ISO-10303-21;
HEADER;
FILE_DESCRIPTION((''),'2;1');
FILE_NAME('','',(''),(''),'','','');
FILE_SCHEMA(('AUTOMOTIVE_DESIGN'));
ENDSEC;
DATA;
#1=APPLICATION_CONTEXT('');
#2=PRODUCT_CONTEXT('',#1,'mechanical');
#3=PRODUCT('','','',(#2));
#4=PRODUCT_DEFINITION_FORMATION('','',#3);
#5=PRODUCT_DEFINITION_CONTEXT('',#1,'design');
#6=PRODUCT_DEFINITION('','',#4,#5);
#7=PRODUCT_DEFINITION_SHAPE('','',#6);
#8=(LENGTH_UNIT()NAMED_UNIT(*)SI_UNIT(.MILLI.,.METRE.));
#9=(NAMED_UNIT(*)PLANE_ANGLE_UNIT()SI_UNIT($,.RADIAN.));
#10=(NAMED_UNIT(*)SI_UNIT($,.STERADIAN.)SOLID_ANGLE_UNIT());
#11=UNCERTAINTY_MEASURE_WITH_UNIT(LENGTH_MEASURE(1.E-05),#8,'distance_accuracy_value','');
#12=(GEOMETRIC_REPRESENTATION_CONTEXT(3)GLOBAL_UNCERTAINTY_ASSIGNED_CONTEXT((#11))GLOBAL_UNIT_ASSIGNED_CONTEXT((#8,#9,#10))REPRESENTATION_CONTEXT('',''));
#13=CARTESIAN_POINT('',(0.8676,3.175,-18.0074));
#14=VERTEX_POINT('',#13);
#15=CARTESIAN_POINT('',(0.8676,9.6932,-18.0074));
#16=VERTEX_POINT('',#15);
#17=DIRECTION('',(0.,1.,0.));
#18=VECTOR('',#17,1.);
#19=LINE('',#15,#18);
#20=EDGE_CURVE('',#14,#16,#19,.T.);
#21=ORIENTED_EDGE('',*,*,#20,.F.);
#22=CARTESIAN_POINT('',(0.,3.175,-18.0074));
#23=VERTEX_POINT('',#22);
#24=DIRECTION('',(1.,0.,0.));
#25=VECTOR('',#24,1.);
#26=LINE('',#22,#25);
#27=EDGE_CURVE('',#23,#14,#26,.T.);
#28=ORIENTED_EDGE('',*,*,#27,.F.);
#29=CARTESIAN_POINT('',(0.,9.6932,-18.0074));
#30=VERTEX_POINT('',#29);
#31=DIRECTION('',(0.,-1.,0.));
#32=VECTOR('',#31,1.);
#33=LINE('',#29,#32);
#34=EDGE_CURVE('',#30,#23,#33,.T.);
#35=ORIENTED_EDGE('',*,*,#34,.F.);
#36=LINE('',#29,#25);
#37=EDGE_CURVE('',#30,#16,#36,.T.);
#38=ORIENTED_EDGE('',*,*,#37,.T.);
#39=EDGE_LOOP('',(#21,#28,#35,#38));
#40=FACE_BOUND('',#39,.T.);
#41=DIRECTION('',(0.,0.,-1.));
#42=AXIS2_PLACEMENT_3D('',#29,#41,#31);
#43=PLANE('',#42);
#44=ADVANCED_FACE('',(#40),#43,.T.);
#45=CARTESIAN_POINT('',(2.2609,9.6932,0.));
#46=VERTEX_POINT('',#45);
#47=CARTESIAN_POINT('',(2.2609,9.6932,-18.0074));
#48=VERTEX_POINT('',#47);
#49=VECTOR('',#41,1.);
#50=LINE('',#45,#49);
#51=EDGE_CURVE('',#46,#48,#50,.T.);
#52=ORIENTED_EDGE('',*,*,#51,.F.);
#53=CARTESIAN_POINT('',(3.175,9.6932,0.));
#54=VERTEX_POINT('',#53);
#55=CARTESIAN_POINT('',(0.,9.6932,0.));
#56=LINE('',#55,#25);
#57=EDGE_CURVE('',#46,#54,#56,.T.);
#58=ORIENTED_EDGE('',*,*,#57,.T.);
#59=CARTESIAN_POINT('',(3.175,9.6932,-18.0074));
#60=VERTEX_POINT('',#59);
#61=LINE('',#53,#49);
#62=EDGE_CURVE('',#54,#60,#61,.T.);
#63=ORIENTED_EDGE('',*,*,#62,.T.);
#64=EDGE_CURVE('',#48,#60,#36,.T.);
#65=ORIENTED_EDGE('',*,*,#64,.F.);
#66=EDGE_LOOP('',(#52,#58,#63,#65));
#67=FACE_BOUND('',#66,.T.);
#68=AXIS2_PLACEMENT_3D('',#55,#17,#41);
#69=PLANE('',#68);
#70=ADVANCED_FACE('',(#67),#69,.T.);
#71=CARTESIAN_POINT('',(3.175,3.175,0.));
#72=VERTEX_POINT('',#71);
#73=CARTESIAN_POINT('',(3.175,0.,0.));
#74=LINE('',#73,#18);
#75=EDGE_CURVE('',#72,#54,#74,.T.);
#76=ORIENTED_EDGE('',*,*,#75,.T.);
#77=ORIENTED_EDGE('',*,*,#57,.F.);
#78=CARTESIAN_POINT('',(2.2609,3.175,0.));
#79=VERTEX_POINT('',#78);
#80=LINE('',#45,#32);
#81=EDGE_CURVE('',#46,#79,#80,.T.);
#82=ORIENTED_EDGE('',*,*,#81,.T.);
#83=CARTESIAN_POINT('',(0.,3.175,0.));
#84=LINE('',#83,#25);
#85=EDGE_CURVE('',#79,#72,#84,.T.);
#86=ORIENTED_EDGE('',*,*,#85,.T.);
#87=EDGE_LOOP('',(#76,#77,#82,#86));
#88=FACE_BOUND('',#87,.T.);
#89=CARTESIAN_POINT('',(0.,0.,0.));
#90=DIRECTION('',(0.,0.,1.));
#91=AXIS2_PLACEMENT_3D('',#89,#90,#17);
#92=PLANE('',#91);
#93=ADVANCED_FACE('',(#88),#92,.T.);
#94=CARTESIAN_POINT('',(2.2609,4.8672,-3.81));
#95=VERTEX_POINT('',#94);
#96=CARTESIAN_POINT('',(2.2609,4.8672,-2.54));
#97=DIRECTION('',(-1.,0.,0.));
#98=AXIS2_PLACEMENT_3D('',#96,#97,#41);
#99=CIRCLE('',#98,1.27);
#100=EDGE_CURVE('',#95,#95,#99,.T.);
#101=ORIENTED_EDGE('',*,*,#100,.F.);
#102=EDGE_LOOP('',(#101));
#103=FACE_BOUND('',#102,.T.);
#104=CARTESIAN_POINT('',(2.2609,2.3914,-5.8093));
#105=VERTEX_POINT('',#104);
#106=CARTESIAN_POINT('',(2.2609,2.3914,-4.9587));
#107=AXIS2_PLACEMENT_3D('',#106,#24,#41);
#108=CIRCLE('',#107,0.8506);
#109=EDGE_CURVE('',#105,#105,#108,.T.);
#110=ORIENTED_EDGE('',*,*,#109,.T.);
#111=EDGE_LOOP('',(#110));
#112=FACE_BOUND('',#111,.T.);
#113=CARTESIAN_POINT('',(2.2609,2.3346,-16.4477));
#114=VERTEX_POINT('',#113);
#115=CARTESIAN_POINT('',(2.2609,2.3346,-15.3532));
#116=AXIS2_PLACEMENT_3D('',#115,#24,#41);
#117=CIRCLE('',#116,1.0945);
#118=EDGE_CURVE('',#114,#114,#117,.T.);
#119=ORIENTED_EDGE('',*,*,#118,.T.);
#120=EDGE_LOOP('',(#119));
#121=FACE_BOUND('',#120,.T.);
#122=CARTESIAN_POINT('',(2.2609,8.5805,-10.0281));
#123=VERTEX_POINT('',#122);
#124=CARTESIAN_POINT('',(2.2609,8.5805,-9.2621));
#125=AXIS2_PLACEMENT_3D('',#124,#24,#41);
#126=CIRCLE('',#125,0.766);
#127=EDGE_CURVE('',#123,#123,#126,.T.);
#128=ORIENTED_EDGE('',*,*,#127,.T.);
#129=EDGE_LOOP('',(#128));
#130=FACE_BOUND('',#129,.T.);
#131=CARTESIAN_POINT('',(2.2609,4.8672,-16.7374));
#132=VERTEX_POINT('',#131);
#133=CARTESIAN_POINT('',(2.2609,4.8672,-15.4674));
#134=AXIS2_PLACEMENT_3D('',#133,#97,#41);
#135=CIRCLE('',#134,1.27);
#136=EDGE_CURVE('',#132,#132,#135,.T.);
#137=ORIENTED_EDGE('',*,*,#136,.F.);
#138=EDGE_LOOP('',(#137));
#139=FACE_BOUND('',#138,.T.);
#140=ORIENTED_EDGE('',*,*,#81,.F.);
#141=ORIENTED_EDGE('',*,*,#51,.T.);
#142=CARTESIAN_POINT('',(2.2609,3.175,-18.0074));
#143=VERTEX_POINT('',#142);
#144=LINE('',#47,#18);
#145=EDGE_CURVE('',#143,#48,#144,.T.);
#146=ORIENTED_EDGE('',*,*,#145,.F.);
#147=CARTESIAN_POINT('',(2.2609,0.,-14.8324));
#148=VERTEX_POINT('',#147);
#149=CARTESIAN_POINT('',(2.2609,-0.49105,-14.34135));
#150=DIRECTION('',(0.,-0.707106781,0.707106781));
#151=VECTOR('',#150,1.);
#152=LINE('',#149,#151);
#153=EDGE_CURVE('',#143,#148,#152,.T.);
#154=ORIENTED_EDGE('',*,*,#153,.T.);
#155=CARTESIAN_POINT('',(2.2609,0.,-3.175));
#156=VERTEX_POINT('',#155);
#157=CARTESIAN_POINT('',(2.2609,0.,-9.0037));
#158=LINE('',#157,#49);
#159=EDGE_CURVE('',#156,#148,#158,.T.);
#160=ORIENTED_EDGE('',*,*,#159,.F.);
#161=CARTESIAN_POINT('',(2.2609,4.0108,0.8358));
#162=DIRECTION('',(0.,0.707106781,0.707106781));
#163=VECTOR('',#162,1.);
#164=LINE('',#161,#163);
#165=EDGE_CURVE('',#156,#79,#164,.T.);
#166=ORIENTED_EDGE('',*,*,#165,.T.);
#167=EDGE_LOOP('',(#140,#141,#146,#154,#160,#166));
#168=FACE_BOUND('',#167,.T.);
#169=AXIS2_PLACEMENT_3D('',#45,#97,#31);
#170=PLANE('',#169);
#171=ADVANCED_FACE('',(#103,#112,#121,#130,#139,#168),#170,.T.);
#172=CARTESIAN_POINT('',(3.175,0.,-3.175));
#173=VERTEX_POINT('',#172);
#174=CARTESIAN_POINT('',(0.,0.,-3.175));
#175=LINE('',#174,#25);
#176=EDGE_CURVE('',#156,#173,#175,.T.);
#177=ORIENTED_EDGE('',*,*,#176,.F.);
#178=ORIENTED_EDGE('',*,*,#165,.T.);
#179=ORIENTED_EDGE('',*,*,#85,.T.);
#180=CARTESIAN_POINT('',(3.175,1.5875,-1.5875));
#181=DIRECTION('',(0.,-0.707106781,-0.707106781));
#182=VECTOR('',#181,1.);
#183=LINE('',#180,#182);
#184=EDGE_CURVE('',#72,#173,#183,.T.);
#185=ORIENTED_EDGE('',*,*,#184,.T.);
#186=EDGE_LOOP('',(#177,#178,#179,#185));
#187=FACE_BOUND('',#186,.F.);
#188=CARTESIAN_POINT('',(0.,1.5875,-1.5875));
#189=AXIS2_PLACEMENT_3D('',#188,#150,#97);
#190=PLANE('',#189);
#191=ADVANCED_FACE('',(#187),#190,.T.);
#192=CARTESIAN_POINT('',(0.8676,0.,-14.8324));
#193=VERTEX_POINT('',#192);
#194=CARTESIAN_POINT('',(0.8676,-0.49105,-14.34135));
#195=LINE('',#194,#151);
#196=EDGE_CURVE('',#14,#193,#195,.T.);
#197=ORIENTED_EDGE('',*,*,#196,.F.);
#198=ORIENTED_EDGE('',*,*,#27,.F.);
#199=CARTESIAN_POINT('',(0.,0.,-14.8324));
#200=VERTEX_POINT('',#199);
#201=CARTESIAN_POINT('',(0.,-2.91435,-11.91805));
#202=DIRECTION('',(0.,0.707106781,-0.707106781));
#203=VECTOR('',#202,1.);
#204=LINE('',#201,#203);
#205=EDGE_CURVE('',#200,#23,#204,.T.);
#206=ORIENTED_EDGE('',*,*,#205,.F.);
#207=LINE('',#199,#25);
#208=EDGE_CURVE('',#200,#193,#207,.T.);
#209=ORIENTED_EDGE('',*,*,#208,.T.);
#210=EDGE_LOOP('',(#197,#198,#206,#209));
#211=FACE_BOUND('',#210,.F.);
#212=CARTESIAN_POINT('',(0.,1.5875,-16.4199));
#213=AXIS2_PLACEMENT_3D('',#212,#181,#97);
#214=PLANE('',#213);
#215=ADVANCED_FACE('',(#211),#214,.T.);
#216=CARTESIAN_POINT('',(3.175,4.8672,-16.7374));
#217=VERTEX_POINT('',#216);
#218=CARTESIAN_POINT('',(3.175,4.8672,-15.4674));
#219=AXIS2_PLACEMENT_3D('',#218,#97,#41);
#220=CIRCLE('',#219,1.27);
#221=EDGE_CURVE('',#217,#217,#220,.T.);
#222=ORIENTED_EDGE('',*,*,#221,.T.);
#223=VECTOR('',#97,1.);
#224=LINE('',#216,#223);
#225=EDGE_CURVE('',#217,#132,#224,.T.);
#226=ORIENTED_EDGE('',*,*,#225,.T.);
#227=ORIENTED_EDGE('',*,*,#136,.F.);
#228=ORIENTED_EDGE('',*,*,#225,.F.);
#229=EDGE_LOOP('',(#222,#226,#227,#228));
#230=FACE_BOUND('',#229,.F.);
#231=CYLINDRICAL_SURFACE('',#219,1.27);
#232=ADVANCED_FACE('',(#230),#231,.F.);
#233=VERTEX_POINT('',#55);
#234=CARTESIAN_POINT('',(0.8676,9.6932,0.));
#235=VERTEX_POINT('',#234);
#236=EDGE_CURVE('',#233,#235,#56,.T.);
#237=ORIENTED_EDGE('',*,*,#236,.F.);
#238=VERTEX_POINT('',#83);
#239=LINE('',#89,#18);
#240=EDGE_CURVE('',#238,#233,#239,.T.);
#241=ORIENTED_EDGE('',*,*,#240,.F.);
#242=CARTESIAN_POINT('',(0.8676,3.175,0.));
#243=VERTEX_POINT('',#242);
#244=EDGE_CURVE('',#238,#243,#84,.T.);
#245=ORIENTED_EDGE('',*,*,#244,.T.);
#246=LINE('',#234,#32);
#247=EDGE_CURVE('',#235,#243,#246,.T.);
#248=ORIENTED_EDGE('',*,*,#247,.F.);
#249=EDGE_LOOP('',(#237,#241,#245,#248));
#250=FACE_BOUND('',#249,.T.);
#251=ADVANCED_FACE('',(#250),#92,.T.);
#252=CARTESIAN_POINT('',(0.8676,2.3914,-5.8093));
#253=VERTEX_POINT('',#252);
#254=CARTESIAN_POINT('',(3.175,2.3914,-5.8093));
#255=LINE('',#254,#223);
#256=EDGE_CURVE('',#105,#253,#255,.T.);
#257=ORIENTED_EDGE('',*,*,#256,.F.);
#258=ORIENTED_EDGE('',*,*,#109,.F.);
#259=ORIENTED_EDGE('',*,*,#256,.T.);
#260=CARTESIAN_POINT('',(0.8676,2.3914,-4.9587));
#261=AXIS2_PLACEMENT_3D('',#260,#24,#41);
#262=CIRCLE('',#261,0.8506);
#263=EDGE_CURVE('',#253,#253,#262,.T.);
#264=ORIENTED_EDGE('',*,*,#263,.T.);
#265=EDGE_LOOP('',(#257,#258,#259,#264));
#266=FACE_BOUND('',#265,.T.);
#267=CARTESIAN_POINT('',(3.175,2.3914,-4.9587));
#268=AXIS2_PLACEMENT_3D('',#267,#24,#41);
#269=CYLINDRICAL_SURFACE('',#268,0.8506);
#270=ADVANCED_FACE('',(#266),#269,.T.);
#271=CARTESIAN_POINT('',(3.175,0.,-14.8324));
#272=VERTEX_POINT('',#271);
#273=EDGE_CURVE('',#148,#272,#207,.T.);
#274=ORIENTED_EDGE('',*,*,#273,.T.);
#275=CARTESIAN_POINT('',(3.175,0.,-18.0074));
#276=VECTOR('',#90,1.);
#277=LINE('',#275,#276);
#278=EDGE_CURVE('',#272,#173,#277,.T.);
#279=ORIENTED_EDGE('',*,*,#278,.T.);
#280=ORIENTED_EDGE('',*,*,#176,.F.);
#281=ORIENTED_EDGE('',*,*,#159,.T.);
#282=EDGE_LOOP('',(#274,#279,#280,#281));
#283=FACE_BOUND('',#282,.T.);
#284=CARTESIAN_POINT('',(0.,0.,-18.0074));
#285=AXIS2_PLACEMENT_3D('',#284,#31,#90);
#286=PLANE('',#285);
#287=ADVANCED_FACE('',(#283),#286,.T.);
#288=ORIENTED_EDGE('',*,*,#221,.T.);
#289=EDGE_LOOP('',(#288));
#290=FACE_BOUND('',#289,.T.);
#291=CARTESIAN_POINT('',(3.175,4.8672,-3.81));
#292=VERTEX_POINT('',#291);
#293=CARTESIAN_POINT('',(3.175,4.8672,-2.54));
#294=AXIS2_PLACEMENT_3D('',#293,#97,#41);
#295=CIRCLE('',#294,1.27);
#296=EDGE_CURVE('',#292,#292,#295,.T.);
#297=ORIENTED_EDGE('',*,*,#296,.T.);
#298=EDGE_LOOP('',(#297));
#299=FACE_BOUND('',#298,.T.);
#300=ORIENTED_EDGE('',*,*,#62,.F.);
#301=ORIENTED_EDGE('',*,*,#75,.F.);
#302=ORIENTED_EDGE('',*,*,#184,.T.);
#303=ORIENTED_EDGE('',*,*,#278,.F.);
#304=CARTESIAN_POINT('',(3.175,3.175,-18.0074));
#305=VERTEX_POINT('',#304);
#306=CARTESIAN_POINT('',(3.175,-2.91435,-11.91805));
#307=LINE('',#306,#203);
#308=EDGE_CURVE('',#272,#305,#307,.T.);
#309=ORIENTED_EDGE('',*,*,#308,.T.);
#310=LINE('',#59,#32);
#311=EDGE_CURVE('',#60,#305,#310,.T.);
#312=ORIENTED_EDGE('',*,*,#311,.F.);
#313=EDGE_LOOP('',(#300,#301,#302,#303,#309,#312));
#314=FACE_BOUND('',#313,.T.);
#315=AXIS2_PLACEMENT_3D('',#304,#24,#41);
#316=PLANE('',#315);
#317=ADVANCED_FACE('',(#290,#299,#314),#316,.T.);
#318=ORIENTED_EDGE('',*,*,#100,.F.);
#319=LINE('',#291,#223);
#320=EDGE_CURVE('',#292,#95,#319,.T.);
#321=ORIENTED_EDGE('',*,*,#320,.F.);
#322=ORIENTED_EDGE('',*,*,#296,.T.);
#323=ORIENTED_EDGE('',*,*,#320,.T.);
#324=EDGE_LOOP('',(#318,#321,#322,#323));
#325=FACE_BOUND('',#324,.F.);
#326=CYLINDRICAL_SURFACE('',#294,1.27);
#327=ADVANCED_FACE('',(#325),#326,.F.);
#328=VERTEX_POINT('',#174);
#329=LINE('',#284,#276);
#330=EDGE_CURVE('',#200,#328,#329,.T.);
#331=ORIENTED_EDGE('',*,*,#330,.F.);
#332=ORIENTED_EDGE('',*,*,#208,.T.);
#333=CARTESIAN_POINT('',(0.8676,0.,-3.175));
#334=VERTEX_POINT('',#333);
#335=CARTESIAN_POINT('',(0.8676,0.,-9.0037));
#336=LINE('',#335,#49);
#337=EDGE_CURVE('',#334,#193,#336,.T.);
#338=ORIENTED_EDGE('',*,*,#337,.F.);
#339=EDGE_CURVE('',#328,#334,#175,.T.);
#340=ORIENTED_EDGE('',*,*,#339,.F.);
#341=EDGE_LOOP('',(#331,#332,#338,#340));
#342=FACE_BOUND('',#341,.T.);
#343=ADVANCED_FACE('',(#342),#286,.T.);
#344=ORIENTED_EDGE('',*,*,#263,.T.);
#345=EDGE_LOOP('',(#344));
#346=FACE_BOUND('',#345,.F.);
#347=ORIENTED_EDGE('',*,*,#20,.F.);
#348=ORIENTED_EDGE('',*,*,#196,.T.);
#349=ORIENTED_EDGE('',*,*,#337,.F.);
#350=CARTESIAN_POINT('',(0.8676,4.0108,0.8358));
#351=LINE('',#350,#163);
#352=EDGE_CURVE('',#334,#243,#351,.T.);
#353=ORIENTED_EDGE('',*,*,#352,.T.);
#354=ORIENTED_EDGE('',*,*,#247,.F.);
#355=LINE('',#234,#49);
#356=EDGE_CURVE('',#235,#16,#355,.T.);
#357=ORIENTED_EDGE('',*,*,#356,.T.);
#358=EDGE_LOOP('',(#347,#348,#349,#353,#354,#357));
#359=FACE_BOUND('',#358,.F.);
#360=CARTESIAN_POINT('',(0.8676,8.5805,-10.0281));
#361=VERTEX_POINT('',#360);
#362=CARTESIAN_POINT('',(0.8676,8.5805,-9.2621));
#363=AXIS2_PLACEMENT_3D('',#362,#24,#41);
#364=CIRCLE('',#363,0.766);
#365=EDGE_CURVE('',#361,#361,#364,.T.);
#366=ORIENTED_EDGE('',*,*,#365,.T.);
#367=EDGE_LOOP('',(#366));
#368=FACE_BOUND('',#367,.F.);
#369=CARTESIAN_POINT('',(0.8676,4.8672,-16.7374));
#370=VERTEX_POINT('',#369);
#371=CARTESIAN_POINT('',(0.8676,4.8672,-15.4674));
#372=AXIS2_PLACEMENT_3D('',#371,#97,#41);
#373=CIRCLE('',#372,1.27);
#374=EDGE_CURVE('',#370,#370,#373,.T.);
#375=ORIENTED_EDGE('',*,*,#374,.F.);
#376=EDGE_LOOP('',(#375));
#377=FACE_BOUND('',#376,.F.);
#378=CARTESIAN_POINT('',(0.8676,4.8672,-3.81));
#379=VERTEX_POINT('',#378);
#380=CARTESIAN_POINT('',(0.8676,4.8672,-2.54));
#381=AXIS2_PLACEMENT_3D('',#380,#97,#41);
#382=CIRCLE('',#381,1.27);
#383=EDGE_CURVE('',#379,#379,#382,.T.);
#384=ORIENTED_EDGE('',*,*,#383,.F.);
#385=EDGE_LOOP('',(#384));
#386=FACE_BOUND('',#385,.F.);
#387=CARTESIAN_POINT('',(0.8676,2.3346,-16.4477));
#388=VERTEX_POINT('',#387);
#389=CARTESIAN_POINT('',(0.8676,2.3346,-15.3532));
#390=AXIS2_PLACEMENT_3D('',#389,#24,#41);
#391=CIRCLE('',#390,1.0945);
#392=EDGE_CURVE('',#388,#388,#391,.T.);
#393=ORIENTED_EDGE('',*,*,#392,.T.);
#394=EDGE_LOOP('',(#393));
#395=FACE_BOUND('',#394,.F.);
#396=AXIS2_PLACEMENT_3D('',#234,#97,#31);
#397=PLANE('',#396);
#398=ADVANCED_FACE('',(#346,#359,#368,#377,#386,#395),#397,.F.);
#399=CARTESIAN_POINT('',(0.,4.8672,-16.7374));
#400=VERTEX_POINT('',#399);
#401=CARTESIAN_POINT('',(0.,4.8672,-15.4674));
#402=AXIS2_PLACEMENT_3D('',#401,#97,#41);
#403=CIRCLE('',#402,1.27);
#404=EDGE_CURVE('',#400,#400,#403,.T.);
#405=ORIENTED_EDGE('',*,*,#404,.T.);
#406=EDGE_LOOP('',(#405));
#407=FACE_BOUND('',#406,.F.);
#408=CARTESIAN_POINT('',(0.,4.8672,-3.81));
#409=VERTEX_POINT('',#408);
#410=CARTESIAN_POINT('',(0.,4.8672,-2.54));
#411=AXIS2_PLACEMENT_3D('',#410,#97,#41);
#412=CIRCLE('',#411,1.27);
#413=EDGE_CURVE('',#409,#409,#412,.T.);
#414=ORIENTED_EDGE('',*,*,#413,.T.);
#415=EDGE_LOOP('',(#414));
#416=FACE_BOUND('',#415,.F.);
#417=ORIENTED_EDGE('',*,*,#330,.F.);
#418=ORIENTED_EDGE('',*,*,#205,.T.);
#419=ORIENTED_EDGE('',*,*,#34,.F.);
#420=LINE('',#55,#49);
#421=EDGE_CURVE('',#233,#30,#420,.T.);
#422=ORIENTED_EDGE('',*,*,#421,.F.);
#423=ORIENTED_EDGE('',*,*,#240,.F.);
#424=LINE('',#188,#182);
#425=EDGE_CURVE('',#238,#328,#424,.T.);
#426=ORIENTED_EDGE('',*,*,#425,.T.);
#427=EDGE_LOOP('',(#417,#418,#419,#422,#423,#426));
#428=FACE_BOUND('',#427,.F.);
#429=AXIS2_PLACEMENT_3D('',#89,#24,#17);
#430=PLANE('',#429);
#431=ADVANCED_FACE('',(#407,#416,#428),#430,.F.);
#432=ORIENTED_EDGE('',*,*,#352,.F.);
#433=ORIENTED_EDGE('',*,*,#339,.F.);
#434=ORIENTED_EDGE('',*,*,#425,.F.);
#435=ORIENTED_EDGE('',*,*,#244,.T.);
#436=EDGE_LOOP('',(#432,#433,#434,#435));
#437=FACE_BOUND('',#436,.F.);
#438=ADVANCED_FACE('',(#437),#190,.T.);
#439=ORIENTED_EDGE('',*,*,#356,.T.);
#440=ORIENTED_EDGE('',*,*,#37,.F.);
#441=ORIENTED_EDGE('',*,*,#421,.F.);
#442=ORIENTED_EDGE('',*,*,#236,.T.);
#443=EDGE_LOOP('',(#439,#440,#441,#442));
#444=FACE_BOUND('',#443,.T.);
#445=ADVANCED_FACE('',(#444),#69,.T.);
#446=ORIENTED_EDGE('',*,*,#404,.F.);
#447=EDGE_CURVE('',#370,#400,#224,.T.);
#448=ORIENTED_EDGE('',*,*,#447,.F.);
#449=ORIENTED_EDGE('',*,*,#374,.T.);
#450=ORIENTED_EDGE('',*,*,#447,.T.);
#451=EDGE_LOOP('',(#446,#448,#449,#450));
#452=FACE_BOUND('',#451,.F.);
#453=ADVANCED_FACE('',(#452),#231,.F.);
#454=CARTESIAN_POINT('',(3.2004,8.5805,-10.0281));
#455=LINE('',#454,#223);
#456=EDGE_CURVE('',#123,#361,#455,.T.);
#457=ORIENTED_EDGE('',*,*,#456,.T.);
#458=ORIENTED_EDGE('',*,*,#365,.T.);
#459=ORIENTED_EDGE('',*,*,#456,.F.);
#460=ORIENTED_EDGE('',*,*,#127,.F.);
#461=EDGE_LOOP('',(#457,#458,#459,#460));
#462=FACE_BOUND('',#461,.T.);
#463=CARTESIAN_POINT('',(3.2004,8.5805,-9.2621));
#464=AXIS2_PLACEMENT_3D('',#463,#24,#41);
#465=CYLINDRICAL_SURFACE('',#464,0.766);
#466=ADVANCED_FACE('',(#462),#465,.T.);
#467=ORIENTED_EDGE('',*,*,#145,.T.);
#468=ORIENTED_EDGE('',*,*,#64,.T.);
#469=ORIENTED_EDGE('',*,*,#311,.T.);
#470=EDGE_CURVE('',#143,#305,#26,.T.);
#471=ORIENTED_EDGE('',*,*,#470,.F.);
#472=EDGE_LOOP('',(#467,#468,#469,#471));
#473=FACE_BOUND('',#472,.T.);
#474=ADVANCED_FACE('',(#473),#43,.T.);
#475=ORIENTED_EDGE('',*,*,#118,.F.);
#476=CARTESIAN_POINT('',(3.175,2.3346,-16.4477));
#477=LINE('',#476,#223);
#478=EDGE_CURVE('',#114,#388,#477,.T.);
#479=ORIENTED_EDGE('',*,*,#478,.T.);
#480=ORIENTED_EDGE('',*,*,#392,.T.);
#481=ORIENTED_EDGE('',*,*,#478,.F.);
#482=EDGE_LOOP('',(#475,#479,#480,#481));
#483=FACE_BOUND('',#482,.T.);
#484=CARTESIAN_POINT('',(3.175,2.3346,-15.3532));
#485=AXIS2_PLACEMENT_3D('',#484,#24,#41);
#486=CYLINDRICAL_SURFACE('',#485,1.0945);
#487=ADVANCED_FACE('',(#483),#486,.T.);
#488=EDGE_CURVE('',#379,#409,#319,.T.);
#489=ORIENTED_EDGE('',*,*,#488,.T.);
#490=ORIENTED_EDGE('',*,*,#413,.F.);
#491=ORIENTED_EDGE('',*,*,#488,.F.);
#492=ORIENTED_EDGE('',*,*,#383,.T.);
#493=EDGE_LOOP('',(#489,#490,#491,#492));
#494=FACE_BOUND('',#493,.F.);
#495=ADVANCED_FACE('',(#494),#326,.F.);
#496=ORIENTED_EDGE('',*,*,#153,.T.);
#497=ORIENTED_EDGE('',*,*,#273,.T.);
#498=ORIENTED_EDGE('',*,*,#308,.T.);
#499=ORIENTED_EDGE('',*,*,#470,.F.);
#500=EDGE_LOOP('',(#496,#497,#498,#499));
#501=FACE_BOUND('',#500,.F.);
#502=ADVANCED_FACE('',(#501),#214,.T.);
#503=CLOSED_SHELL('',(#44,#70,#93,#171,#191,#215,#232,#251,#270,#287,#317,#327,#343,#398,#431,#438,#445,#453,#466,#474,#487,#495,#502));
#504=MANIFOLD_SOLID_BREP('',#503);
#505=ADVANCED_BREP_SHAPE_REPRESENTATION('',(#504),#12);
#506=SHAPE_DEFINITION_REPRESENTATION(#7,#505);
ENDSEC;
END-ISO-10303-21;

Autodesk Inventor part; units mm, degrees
ref_plane "YZ Plane" through (0, 0, 0) normal (1, 0, 0) x (0, 1, 0)
ref_plane "XZ Plane" through (0, 0, 0) normal (0, 1, 0) x (-1, 0, 0)
ref_plane "XY Plane" through (0, 0, 0) normal (0, 0, 1) x (1, 0, 0)
sketch "Sketch1" plane through (0, 0, 0) normal (1, 0, 0) x (0, 1, 0)
  line L0 (0, 0) -> (9.6932, 0)
  line L1 (9.6932, 0) -> (9.6932, -18.0074)
  line L2 (9.6932, -18.0074) -> (0, -18.0074)
  line L3 (0, -18.0074) -> (0, 0)
extrude "Extrusion1" add sketch "Sketch1" along normal blind 3.175
chamfer "Chamfer1" distance 3.175 angle 45 1 edges at (1.5875, 0, 0)
chamfer "Chamfer2" distance 3.175 angle 45 1 edges at (1.5875, 0, -18.0074)
sketch "Sketch2" plane through (0, 9.6932, 0) normal (0, 0, 1) x (1, 0, 0)
  line L0 (0, 0) -> (3.175, 0) projected
  line L1 (1.5875, 0) -> (0.8676, 0)
  line L2 (0.8676, 0) -> (0.8676, -11.3231)
  line L3 (0.8676, -11.3231) -> (1.5875, -11.3231)
  line L4 (1.5875, -11.3231) -> (1.5875, 0)
  line L5 (1.5875, 0) -> (2.2609, 0)
  line L6 (2.2609, 0) -> (2.2609, -11.3231)
  line L7 (2.2609, -11.3231) -> (1.5875, -11.3231)
  line L8 (1.5875, -11.3231) -> (1.5875, 0)
  point P0 (0, -9.6932)
extrude "Extrusion2" cut sketch "Sketch2" against normal blind 254
ref_plane "Work Plane1" through (3.2004, 0, 0) normal (1, 0, 0) x (0, 0, -1)
sketch "Sketch3" plane through (3.2004, 0, 0) normal (1, 0, 0) x (0, 0, -1)
  circle A0 centre (9.2621, 8.5805) radius 0.766
  point P0 (0, 0)
extrude "Extrusion3" add sketch "Sketch3" against normal blind 3.175
sketch "Sketch4" plane through (3.175, 0, 0) normal (1, 0, 0) x (0, 0, -1)
  circle A0 centre (4.9587, 2.3914) radius 0.8506
  point P0 (0, 0)
extrude "Extrusion4" add sketch "Sketch4" against normal blind 3.175
thicken "Thicken1" operation add thickness 0.0254 both sides no extend neighbours yes toward (-1, 0, 0) faces at (3.2004, 8.8685, -9.0418)
sketch "Sketch5" plane through (3.175, 3.175, -18.0074) normal (1, 0, 0) x (0, 0, -1)
  circle A0 centre (-2.6542, -0.8404) radius 1.0945
  point P0 (-18.0074, -3.175)
extrude "Extrusion5" add sketch "Sketch5" against normal blind 3.175
hole "Hole4" at (3.175, 4.8672, -2.54) direction (-1, 0, 0) diameter 2.54 depth 25.4 tip angle 118
sketch "Sketch6" plane through (3.175, 3.175, -18.0074) normal (1, 0, 0) x (0, 0, -1)
  point P0 (-18.0074, -3.175)
hole "Hole5" at (3.175, 4.8672, -15.4674) direction (-1, 0, 0) diameter 2.54 depth 25.4 tip angle 118
properties part number "gabetrain"
